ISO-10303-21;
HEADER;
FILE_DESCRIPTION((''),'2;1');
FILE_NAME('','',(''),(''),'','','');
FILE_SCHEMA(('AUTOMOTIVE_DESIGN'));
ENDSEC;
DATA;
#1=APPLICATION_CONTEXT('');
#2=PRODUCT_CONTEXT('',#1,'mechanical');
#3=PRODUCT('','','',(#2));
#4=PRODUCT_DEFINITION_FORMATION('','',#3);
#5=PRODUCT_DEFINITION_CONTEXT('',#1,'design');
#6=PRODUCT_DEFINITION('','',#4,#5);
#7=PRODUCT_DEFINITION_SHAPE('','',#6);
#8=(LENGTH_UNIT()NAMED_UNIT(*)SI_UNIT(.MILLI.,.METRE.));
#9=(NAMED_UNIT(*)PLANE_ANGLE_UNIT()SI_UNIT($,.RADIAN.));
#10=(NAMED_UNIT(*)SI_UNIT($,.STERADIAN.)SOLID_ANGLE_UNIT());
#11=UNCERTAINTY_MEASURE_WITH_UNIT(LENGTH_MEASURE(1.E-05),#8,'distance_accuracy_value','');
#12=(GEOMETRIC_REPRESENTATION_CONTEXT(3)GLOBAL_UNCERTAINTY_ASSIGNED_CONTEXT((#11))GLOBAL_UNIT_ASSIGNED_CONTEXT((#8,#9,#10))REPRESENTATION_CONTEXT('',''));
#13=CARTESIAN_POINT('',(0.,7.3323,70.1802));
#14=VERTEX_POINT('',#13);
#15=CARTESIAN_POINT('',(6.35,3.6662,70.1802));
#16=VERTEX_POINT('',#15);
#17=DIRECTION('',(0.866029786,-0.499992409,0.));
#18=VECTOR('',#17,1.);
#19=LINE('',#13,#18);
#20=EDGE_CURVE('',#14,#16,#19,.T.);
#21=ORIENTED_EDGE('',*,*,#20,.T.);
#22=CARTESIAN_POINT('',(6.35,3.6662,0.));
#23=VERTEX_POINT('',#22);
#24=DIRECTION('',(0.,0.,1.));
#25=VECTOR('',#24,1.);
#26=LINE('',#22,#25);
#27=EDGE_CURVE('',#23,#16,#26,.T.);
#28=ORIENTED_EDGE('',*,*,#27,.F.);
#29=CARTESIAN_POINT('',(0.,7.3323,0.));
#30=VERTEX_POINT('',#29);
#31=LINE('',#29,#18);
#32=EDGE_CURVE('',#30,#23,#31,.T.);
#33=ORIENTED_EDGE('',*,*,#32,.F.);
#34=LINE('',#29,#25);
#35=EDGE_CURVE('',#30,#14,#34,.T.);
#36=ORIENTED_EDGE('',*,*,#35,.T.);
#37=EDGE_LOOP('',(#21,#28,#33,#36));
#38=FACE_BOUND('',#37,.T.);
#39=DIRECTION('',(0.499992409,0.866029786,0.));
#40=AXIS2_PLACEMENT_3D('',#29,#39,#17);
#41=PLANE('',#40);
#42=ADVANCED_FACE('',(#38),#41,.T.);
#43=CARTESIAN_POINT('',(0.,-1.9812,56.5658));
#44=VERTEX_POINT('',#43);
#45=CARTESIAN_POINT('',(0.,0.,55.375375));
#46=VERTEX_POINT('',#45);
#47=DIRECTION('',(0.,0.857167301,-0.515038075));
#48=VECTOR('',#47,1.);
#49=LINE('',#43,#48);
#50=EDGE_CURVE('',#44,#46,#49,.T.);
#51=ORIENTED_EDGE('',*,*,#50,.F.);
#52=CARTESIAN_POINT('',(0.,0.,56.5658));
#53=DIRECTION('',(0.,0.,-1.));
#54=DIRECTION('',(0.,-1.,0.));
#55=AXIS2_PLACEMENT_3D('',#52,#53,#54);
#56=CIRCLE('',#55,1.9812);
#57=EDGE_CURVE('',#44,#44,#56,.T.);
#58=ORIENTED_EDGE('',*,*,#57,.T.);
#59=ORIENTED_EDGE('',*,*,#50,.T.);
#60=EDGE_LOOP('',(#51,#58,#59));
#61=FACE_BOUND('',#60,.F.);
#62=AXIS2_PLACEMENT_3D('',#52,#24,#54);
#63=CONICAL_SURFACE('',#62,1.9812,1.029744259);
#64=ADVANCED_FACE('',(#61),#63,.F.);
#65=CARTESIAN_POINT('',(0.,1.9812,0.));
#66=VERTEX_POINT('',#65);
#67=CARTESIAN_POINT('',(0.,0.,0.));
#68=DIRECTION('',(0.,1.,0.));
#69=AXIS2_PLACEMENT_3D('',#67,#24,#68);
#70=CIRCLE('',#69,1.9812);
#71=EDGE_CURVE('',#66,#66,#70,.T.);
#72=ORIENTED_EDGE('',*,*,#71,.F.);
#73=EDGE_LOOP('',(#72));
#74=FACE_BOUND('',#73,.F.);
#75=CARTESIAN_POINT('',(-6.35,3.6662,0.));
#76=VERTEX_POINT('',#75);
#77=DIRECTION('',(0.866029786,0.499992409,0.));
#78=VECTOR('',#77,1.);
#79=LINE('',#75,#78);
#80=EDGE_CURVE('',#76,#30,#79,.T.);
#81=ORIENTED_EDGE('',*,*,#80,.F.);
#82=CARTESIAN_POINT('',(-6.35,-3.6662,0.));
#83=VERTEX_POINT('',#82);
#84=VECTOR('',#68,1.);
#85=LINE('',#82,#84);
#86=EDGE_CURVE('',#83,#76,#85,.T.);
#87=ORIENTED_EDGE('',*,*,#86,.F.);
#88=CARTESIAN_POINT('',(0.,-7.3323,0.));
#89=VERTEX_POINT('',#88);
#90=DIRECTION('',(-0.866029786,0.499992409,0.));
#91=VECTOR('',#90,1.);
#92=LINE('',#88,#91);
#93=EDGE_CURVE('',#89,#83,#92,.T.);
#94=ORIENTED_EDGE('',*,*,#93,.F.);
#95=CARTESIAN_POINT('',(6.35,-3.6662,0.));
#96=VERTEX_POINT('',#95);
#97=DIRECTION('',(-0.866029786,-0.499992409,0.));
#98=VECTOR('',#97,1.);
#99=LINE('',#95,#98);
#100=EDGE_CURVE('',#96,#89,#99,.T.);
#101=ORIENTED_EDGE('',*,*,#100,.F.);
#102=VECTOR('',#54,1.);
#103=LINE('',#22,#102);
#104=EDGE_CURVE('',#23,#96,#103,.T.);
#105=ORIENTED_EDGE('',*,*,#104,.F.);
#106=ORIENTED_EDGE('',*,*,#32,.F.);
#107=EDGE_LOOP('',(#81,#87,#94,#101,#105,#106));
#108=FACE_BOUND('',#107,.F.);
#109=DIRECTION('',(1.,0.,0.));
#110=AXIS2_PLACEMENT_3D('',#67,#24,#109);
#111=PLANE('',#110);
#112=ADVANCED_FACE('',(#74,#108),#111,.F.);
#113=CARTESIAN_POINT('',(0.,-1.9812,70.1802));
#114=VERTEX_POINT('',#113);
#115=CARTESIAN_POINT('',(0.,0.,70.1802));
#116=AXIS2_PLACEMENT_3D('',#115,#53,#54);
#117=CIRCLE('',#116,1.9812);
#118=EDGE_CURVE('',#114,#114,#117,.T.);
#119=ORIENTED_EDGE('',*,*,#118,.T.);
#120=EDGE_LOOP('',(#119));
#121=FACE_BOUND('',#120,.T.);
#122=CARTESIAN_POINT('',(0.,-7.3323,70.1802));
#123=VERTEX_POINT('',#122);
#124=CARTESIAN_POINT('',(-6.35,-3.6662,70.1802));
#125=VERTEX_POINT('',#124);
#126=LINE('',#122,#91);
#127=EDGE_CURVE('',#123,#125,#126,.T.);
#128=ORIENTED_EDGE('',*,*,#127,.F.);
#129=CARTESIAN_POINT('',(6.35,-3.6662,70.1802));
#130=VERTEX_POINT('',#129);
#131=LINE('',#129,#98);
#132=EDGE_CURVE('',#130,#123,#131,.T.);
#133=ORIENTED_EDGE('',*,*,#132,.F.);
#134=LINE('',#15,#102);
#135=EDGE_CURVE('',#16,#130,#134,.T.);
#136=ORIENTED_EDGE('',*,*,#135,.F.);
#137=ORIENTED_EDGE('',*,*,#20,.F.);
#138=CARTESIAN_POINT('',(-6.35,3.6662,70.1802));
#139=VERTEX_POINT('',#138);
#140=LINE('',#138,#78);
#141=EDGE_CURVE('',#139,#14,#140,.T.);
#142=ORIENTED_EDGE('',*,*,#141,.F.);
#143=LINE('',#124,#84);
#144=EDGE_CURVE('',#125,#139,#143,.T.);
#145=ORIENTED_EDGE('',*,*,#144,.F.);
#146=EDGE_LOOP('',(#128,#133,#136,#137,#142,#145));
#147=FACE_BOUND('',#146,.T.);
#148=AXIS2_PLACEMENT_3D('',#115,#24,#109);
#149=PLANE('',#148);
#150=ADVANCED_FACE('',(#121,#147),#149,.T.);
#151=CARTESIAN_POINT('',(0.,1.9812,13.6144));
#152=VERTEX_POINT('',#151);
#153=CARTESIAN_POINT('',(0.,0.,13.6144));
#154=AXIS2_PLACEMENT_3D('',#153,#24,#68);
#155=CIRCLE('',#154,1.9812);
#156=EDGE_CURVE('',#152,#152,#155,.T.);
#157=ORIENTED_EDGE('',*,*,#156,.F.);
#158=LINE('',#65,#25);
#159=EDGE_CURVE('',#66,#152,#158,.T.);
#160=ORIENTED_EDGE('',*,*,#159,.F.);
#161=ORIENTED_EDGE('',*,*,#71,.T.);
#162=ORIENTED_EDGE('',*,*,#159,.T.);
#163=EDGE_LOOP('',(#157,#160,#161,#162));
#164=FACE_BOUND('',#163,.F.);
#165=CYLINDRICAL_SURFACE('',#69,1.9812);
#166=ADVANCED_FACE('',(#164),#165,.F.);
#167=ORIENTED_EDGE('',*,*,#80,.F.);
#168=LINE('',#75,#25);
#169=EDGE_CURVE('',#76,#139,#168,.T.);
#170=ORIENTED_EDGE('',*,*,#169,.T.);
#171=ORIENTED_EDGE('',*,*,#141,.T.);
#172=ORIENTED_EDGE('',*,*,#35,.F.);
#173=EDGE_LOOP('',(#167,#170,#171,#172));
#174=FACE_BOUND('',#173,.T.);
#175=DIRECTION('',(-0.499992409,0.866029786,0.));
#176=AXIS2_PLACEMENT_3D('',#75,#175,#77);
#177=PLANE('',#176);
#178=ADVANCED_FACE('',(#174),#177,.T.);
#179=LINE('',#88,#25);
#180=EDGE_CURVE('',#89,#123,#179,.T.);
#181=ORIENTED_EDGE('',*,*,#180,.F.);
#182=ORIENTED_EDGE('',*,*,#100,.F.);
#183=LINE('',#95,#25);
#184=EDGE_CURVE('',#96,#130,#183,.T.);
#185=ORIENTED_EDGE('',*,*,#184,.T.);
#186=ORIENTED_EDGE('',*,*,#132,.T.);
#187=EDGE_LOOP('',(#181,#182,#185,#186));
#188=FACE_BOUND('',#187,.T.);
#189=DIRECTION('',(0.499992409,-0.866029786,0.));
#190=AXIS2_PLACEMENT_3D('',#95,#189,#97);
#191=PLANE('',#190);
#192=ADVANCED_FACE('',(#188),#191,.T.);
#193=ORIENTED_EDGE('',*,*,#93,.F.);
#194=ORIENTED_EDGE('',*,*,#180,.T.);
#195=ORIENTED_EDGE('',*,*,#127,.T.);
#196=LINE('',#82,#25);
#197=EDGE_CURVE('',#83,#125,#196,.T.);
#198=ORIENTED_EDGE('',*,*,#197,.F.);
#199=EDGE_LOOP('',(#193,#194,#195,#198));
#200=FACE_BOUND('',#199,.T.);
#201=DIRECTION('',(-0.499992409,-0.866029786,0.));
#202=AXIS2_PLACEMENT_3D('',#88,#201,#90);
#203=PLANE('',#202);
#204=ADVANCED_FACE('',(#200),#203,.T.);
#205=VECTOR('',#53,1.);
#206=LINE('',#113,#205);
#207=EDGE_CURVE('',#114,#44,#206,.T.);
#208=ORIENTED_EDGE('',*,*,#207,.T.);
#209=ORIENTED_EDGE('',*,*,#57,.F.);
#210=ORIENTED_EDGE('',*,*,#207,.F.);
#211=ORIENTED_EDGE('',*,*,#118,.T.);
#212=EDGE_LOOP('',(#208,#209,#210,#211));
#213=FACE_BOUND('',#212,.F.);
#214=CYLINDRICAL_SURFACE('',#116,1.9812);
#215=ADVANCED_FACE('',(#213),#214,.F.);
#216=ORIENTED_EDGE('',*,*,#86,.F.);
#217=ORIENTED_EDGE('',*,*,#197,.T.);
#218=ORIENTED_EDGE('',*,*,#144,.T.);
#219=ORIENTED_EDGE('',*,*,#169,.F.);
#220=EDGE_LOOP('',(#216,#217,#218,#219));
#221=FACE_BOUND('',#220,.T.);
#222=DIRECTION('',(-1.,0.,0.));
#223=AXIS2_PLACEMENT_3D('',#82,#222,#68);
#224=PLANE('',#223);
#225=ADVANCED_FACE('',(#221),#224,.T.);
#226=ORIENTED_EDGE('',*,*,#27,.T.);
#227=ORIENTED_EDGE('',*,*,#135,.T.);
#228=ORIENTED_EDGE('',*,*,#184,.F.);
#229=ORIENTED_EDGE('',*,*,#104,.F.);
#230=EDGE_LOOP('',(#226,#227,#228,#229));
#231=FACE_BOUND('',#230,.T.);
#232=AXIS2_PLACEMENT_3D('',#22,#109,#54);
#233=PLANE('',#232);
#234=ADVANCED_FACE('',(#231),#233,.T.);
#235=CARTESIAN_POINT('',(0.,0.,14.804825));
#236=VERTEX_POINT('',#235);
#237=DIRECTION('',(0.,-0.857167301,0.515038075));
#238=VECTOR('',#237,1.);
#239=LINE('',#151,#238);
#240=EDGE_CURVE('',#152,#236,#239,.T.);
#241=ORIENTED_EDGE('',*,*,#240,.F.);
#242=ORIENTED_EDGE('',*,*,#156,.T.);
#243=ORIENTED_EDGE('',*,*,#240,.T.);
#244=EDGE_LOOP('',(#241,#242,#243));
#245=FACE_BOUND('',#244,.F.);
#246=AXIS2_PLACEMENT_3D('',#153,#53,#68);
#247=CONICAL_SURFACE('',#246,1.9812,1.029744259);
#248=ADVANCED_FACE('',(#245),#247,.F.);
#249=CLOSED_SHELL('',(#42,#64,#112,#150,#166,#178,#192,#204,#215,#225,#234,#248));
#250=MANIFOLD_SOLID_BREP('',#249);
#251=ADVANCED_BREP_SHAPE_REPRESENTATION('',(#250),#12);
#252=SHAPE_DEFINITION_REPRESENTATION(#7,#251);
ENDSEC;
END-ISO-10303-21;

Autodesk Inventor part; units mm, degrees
ref_plane "YZ Plane" through (0, 0, 0) normal (1, 0, 0) x (0, 1, 0)
ref_plane "XZ Plane" through (0, 0, 0) normal (0, 1, 0) x (-1, 0, 0)
ref_plane "XY Plane" through (0, 0, 0) normal (0, 0, 1) x (1, 0, 0)
sketch "Sketch1" plane through (0, 0, 0) normal (0, 0, 1) x (1, 0, 0)
  line L0 (-6.35, -3.6662) -> (-6.35, 3.6662)
  line L1 (-6.35, 3.6662) -> (0, 7.3323)
  line L2 (0, 7.3323) -> (6.35, 3.6662)
  line L3 (6.35, 3.6662) -> (6.35, -3.6662)
  line L4 (6.35, -3.6662) -> (0, -7.3323)
  line L5 (0, -7.3323) -> (-6.35, -3.6662)
  point P0 (0, 0)
  point P1 (0, 0)
  dimension "d0" = 12.7
extrude "Extrusion1" add sketch "Sketch1" along normal blind 70.1802
sketch "Sketch2" plane through (0, 0, 70.1802) normal (0, 0, 1) x (1, 0, 0)
  point P0 (0, 0)
  point P1 (0, 0)
hole "Hole1" at (0, 0, 70.1802) direction (0, 0, -1) diameter 3.9624 depth 13.6144 tip angle 118 thread size "10-32 UNF" class "2B" standard "ANSI Unified Screw Threads"
sketch "Sketch3" plane through (0, 0, 0) normal (0, 0, -1) x (-1, 0, 0)
  circle A0 centre (0, 0) radius 1.9812 projected
hole "Hole2" at (0, 0, 0) direction (0, 0, 1) diameter 3.9624 depth 13.6144 tip angle 118 thread size "10-32 UNF" class "2B" standard "ANSI Unified Screw Threads"
properties part number "STOCK,HEX,SHAFT,TURRET,DRIVE" material "Aluminum 6061"
